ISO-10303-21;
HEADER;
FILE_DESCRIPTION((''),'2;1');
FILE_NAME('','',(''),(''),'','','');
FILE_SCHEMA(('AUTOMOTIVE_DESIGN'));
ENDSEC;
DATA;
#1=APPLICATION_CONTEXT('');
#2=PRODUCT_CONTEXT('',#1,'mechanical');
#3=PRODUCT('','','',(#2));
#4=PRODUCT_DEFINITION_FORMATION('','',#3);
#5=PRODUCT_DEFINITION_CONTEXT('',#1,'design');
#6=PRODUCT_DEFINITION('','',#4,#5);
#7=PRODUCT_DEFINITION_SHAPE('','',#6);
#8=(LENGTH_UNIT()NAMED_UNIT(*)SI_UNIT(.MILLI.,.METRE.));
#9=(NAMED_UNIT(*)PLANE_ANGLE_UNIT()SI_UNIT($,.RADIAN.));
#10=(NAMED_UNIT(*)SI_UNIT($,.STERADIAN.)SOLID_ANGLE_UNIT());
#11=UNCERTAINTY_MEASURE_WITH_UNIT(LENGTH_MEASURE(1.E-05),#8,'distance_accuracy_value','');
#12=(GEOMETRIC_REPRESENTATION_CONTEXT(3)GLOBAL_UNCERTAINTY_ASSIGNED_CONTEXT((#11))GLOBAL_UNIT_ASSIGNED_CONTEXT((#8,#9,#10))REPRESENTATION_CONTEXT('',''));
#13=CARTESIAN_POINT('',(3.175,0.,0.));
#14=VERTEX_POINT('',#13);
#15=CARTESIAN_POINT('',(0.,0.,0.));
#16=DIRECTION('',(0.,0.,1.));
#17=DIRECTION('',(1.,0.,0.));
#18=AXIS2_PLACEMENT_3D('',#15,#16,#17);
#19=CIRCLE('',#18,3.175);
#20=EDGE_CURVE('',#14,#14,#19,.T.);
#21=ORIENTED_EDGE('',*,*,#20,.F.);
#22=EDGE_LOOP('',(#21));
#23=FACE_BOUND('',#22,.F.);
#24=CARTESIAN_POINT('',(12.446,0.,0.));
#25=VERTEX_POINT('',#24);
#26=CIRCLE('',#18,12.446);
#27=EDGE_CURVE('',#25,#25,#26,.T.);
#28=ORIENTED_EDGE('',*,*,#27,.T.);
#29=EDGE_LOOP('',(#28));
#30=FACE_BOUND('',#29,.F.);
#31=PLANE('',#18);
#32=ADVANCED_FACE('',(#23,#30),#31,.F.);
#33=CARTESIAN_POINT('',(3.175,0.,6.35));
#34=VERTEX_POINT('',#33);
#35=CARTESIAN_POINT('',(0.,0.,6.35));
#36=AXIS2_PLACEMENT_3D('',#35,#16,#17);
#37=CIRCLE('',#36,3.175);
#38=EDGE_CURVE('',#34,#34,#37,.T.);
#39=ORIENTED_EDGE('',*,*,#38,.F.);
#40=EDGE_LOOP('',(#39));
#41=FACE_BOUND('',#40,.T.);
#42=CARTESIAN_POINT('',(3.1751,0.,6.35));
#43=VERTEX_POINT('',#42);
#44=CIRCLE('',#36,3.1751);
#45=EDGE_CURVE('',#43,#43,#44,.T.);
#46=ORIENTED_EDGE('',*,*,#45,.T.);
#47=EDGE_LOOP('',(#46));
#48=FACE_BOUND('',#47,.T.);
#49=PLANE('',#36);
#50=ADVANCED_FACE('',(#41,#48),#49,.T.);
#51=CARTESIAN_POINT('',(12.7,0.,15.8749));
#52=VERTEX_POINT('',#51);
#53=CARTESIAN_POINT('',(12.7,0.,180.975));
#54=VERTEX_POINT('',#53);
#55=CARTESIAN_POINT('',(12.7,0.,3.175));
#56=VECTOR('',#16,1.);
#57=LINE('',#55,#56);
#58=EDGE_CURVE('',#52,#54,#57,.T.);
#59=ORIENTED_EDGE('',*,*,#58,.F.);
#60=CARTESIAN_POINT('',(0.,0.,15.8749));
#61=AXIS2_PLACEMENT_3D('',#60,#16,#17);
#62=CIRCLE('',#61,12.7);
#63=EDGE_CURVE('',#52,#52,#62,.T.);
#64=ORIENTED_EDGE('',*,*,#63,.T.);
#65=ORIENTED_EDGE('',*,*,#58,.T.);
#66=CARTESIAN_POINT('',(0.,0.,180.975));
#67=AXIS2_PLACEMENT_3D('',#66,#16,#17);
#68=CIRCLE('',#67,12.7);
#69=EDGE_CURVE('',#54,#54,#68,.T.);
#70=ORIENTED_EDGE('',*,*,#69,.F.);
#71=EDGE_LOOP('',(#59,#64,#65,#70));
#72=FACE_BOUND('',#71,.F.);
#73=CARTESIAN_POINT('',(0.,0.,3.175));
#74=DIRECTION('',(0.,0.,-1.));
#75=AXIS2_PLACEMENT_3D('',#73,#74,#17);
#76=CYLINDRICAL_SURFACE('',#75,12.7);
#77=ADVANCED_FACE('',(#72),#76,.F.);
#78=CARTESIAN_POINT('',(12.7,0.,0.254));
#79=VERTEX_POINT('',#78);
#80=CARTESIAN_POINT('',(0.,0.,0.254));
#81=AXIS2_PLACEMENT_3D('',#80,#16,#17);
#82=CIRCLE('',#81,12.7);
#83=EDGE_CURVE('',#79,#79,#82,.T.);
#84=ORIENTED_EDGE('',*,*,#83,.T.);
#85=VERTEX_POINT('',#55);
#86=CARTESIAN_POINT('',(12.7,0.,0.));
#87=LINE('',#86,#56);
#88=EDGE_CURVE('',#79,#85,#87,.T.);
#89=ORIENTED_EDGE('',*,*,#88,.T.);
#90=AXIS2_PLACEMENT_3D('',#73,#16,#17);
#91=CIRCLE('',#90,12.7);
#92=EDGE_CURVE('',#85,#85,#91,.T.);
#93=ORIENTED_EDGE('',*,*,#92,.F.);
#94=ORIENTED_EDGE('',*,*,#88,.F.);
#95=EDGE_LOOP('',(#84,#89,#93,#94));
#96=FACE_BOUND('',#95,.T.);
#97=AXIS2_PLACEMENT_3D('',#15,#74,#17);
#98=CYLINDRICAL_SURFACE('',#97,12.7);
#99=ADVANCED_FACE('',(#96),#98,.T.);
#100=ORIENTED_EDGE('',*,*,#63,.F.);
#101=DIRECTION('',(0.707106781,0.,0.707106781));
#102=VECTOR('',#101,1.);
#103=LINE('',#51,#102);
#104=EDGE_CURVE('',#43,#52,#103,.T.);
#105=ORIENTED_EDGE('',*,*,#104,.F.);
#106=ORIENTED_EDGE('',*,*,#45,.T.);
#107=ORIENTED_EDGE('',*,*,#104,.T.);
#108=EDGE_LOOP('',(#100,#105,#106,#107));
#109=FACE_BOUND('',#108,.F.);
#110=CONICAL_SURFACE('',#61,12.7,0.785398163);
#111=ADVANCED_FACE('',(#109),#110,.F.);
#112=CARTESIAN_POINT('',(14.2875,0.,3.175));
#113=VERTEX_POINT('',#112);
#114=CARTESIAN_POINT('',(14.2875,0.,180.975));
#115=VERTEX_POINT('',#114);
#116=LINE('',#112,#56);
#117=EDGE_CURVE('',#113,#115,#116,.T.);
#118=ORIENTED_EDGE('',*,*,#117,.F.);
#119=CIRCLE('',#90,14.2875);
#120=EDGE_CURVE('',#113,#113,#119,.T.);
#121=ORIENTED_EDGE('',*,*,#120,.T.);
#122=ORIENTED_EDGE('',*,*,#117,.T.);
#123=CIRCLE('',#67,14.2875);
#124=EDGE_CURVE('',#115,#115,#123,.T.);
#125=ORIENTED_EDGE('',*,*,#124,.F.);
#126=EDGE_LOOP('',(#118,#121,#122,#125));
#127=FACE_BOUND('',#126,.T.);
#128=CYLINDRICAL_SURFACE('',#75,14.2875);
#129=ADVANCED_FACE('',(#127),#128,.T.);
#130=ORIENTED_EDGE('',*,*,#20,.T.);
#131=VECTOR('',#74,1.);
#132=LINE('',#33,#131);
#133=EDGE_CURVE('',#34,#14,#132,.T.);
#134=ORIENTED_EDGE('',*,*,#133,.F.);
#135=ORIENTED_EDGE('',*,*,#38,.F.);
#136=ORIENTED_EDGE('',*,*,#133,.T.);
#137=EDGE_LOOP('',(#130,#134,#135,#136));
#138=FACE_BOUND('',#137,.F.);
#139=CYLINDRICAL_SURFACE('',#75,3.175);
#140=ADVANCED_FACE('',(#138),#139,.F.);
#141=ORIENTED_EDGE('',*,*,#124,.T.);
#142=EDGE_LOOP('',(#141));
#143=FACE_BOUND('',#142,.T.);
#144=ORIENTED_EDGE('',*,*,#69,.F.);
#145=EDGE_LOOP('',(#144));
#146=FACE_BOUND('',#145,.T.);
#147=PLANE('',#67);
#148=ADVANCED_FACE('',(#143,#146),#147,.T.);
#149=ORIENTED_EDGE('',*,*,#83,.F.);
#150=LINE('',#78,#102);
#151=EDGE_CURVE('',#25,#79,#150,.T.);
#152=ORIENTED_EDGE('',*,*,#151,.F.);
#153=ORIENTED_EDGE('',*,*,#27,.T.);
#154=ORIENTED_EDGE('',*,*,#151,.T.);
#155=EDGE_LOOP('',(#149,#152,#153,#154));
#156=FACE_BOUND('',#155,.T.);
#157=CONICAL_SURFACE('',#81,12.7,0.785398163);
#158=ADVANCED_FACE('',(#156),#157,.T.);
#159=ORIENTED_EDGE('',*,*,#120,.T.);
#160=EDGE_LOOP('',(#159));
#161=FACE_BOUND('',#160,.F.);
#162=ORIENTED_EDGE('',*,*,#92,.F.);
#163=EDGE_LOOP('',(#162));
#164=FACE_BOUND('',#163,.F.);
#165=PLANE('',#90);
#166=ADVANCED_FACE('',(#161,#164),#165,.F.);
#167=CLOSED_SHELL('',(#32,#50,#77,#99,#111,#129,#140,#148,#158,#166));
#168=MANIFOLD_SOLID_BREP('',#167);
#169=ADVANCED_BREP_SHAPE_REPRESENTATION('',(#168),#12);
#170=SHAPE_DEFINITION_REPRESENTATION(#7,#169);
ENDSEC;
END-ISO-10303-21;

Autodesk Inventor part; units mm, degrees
ref_plane "YZ Plane" through (0, 0, 0) normal (1, 0, 0) x (0, 1, 0)
ref_plane "XZ Plane" through (0, 0, 0) normal (0, 1, 0) x (-1, 0, 0)
ref_plane "XY Plane" through (0, 0, 0) normal (0, 0, 1) x (1, 0, 0)
sketch "Sketch1" plane through (0, 0, 0) normal (0, 0, 1) x (1, 0, 0)
  circle A0 centre (0, 0) radius 12.7 projected
  circle A1 centre (0, 0) radius 3.175
  dimension "d0" = 6.35
extrude "Extrusion1" add sketch "Sketch1" along normal blind 3.175
sketch "Sketch2" plane through (0, 0, 3.175) normal (0, 0, 1) x (1, 0, 0)
  circle A0 centre (0, 0) radius 12.7 projected
  circle A1 centre (0, 0) radius 11.1125
  circle A2 centre (0, 0) radius 14.2875
  dimension "d3" = 22.225
  dimension "d4" = 28.575
extrude "Extrusion2" add sketch "Sketch2" along normal blind 177.8 contours A2
sketch "Sketch3" plane through (0, 0, 3.175) normal (0, 0, 1) x (1, 0, 0)
  circle A0 centre (0, 0) radius 12.7 projected
  circle A1 centre (0, 0) radius 3.175 projected
extrude "Extrusion3" add sketch "Sketch3" along normal blind 3.175
chamfer "Chamfer1" distance 9.525 angle 45 1 edges at (-12.7, 0, 6.35)
chamfer "Chamfer2" distance 0.254 angle 45 1 edges at (-12.7, 0, 0)
properties part number "pourTool"
